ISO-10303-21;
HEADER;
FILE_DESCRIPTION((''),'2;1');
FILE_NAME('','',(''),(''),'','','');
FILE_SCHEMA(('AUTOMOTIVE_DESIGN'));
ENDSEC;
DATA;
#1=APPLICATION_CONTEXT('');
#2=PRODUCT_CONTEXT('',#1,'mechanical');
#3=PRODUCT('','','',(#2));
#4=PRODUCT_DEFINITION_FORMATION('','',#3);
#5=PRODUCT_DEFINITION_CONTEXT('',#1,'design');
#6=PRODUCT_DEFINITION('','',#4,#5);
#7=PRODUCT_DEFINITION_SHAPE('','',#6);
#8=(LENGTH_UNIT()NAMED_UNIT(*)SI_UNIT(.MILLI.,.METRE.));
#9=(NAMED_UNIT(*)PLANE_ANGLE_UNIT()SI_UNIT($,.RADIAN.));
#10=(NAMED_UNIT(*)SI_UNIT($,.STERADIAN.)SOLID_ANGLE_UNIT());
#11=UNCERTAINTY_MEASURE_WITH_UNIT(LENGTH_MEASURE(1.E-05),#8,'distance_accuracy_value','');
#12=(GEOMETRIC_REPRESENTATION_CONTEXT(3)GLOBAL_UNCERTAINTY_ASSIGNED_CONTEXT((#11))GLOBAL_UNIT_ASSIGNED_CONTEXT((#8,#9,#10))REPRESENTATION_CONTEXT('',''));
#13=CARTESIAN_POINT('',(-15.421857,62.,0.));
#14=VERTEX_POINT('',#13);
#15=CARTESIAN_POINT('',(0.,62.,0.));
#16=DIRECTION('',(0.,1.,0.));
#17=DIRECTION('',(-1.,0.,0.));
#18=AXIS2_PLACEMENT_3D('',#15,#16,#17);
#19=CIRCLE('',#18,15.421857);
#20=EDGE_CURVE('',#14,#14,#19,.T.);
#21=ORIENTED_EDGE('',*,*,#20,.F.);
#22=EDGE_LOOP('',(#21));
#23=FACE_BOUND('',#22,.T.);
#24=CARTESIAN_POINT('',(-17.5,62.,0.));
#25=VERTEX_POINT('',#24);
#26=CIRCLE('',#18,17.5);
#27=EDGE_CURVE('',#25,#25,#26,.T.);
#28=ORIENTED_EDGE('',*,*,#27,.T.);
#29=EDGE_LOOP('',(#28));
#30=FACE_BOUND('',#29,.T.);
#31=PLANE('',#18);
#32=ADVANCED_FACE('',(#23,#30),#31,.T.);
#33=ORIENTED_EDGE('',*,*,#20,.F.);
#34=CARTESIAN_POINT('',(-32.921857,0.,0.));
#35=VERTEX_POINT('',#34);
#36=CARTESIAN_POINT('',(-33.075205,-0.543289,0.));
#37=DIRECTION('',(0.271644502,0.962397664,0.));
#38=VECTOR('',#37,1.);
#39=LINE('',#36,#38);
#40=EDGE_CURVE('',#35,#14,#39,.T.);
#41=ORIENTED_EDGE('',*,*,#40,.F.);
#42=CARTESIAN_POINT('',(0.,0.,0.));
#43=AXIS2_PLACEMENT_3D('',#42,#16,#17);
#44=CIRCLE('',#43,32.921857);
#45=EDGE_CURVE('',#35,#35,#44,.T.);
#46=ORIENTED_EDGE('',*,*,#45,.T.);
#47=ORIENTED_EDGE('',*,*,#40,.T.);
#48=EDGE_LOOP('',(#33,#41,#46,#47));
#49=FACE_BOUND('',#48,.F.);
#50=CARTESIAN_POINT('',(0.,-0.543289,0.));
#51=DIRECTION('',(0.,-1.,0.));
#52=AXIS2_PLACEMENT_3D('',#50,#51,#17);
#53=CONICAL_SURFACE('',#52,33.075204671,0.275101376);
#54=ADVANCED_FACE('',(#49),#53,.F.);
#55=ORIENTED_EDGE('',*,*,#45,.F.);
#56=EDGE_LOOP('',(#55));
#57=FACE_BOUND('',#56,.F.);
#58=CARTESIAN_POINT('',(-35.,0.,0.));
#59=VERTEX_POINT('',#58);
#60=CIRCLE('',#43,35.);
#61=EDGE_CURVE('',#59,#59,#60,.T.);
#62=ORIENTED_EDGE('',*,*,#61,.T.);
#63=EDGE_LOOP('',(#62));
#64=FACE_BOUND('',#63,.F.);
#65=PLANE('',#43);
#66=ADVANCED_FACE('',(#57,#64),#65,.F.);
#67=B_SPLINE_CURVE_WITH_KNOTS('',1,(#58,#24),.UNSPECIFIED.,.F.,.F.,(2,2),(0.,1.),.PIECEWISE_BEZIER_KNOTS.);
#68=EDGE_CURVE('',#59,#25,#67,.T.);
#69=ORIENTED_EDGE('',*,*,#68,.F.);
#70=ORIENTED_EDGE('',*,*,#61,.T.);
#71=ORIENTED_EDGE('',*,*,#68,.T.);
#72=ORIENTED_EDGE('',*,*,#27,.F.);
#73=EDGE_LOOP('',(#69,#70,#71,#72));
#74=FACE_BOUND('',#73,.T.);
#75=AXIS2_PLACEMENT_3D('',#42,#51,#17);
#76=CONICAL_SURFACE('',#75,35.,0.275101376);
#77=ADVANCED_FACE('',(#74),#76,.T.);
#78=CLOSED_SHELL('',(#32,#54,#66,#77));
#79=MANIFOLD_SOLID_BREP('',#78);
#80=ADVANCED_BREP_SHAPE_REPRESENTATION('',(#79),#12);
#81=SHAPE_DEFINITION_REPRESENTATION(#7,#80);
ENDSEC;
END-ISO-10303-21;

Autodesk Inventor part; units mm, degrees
ref_plane "YZ Plane" through (0, 0, 0) normal (1, 0, 0) x (0, 1, 0)
ref_plane "XY Plane" through (0, 0, 0) normal (0, 0, 1) x (1, 0, 0)
sketch "Szkic6" plane through (0, 0, 0) normal (0, 1, 0) x (-1, 0, 0)
  circle A0 centre (0, 0) radius 35
  dimension "d33" = 70
ref_plane "Płaszczyzna konstrukcyjna1" through (0, 62, 0) normal (0, 1, 0) x (-1, 0, 0)
sketch "Szkic7" plane through (0, 62, 0) normal (0, 1, 0) x (-1, 0, 0)
  circle A0 centre (0, 0) radius 17.5
  dimension "d35" = 35
loft "Wyciągnięcie złożone1" add profiles "Szkic6", "Szkic7"
shell "Skorupa1" thickness 2 removed faces 2 at (-4.3663, 62, -1.0762) at (1.9985, 0, 11.019)
equation "\"d33\" = OD1"
equation "\"d35\" = OD2"
equation "\"d52\" = THK"
equation "\"SzerokośćGięciaPodcięcia\" = Grubość"
equation "\"RozmiarPodcięciaNarożnika\" = 4 * Grubość"
equation "\"PromieńPrzejścia\" = PromieńGięcia"
equation "\"Rozmiar_promienia_Jacobiego\" = PromieńGięcia"
equation "\"Wielk_odstępu\" = Grubość"
equation "\"d2\" = PromieńGięcia"
equation "\"d23\" = PromieńGięcia"
equation "\"OD1\" = 70"
equation "\"OD2\" = 35"
equation "\"L\" = 62"
equation "\"THK\" = 2"
equation "\"d34\" = L"
equation "\"Grubość\" = 1.5"
equation "\"PromieńGięcia\" = 3"
properties part number "Redukcja symetryczna Ø70x35x2 L=62" material "304"
